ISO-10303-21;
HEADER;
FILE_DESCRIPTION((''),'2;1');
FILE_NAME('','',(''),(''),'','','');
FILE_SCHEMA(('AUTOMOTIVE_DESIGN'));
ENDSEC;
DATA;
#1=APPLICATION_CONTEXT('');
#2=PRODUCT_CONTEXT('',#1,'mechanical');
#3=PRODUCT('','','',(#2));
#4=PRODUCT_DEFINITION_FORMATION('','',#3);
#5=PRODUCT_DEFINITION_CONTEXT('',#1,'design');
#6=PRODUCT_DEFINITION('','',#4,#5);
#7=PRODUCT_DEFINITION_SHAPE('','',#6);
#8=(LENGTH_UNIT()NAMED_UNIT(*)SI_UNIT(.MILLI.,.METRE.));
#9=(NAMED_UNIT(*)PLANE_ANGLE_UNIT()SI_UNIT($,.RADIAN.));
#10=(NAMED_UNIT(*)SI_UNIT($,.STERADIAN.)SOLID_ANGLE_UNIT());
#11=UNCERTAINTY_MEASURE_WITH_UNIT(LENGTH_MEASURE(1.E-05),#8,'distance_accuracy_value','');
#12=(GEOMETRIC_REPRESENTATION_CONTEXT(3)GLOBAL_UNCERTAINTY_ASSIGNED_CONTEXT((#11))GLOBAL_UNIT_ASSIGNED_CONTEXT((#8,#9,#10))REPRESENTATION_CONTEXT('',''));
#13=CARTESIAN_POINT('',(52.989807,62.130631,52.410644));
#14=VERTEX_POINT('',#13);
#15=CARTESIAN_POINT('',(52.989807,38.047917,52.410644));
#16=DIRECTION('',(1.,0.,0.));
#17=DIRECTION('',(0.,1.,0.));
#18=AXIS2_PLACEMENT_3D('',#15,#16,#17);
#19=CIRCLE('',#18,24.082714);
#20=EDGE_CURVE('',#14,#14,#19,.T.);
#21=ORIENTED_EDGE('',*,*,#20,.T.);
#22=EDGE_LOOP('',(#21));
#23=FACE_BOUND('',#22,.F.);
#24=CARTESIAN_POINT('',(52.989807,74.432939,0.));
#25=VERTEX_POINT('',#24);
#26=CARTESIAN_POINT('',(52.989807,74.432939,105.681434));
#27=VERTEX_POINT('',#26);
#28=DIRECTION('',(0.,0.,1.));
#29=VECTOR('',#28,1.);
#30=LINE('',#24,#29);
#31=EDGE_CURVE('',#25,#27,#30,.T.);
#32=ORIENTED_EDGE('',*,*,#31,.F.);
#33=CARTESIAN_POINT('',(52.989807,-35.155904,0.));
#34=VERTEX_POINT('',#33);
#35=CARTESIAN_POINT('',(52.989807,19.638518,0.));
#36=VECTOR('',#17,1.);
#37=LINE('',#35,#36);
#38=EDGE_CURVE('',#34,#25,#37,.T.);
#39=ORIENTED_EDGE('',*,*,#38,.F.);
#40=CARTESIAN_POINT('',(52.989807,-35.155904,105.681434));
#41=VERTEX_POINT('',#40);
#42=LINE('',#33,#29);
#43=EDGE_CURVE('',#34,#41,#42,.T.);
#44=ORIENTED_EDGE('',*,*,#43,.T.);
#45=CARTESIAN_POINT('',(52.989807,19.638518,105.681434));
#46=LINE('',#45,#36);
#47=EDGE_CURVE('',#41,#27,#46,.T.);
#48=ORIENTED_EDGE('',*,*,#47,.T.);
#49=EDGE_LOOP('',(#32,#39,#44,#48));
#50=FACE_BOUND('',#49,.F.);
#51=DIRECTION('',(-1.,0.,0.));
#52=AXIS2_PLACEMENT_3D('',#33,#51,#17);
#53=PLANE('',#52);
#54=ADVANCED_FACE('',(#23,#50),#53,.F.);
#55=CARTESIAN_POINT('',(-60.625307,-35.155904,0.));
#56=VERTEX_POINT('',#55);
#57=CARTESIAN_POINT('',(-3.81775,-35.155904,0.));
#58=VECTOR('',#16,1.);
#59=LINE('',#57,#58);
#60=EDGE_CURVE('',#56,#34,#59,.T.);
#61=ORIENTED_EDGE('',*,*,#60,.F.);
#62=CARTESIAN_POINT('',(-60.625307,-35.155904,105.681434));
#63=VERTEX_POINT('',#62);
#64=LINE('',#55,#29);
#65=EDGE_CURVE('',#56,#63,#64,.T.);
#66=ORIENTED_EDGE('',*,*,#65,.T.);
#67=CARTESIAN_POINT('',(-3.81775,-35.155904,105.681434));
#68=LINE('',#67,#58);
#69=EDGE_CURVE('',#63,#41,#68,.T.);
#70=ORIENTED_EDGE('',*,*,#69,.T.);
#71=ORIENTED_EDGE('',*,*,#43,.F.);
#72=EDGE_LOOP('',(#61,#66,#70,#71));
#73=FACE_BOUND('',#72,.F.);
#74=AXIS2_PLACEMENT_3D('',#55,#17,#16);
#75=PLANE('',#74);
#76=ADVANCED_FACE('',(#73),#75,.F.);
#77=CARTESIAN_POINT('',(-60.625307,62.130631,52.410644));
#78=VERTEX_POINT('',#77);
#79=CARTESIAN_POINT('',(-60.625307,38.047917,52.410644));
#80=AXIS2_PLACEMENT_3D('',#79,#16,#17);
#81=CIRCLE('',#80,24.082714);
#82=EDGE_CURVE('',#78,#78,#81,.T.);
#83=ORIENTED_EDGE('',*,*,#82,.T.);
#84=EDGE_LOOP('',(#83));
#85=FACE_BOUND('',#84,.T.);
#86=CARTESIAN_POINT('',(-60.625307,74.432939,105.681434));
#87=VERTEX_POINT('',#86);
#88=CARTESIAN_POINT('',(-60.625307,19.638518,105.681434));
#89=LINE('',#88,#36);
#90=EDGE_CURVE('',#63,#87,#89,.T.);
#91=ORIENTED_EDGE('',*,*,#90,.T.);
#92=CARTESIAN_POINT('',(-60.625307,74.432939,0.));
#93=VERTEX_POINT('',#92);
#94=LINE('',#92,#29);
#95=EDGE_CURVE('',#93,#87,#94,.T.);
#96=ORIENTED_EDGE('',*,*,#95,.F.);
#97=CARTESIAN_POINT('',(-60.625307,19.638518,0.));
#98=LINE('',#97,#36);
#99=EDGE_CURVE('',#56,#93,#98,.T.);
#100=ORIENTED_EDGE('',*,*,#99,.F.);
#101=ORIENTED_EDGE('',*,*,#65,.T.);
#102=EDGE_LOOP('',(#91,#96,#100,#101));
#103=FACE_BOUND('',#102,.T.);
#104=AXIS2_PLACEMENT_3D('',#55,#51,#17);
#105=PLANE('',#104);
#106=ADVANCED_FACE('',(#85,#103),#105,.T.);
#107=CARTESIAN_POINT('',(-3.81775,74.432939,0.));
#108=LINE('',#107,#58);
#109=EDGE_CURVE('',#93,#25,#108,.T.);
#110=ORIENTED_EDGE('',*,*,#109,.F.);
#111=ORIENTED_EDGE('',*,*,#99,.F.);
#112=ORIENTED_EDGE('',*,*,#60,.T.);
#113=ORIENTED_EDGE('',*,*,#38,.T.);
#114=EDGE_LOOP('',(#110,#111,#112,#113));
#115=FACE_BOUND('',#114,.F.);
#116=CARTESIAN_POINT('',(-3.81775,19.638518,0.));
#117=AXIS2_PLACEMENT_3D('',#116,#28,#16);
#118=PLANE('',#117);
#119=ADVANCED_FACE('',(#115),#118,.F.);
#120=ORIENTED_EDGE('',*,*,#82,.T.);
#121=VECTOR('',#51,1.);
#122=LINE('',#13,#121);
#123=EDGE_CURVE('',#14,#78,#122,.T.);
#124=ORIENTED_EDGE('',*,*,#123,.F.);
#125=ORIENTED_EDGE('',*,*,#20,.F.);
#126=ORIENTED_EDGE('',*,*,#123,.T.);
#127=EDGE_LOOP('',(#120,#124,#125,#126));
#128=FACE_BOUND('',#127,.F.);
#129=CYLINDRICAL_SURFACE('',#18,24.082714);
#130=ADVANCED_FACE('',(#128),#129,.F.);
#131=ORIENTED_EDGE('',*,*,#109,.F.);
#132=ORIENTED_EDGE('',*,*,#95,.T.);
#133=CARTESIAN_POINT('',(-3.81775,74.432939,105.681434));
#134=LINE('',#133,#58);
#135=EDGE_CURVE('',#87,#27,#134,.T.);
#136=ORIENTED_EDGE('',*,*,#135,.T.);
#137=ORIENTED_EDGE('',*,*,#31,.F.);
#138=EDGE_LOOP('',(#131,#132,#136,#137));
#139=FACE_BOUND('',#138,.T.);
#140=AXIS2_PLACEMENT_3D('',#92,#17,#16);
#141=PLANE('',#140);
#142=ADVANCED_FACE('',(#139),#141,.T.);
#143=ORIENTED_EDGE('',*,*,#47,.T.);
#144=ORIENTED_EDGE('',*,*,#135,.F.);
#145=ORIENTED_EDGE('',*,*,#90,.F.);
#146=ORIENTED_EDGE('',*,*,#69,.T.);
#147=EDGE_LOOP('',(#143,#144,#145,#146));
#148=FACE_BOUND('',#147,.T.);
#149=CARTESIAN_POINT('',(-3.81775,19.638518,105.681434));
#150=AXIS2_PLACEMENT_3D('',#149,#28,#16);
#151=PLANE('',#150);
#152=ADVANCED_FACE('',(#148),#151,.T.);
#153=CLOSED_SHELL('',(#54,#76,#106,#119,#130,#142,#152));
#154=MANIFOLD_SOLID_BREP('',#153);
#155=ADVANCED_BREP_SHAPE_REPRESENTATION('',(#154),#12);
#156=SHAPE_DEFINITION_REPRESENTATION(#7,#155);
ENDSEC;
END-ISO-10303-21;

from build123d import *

# Parameters (mm, degrees)
F0_W     = 113.6151142418
F0_H     = 109.588842839
F1_DEPTH = 105.6814342737
F2_R     = 24.0827135545
F3_DEPTH = 200


# Not quite as in the source:
# - the program builds the solid bodies; features that only make, move or delete a surface that nothing else refers to are left out


with BuildPart() as f1:
    # F0 (on Top) → F1 (new body)
    with BuildSketch(Plane.XY):
        with Locations((-3.817750141, 19.6385178715)):
            Rectangle(F0_W, F0_H)
    extrude(amount=F1_DEPTH)

    # F2 (on face) → F3 (cut)
    with BuildSketch(Plane.YZ.offset(52.9898069799)):
        with Locations((38.0479171872, 52.4106435478)):
            Circle(F2_R)
    extrude(amount=-F3_DEPTH, mode=Mode.SUBTRACT)


solid = f1.part
